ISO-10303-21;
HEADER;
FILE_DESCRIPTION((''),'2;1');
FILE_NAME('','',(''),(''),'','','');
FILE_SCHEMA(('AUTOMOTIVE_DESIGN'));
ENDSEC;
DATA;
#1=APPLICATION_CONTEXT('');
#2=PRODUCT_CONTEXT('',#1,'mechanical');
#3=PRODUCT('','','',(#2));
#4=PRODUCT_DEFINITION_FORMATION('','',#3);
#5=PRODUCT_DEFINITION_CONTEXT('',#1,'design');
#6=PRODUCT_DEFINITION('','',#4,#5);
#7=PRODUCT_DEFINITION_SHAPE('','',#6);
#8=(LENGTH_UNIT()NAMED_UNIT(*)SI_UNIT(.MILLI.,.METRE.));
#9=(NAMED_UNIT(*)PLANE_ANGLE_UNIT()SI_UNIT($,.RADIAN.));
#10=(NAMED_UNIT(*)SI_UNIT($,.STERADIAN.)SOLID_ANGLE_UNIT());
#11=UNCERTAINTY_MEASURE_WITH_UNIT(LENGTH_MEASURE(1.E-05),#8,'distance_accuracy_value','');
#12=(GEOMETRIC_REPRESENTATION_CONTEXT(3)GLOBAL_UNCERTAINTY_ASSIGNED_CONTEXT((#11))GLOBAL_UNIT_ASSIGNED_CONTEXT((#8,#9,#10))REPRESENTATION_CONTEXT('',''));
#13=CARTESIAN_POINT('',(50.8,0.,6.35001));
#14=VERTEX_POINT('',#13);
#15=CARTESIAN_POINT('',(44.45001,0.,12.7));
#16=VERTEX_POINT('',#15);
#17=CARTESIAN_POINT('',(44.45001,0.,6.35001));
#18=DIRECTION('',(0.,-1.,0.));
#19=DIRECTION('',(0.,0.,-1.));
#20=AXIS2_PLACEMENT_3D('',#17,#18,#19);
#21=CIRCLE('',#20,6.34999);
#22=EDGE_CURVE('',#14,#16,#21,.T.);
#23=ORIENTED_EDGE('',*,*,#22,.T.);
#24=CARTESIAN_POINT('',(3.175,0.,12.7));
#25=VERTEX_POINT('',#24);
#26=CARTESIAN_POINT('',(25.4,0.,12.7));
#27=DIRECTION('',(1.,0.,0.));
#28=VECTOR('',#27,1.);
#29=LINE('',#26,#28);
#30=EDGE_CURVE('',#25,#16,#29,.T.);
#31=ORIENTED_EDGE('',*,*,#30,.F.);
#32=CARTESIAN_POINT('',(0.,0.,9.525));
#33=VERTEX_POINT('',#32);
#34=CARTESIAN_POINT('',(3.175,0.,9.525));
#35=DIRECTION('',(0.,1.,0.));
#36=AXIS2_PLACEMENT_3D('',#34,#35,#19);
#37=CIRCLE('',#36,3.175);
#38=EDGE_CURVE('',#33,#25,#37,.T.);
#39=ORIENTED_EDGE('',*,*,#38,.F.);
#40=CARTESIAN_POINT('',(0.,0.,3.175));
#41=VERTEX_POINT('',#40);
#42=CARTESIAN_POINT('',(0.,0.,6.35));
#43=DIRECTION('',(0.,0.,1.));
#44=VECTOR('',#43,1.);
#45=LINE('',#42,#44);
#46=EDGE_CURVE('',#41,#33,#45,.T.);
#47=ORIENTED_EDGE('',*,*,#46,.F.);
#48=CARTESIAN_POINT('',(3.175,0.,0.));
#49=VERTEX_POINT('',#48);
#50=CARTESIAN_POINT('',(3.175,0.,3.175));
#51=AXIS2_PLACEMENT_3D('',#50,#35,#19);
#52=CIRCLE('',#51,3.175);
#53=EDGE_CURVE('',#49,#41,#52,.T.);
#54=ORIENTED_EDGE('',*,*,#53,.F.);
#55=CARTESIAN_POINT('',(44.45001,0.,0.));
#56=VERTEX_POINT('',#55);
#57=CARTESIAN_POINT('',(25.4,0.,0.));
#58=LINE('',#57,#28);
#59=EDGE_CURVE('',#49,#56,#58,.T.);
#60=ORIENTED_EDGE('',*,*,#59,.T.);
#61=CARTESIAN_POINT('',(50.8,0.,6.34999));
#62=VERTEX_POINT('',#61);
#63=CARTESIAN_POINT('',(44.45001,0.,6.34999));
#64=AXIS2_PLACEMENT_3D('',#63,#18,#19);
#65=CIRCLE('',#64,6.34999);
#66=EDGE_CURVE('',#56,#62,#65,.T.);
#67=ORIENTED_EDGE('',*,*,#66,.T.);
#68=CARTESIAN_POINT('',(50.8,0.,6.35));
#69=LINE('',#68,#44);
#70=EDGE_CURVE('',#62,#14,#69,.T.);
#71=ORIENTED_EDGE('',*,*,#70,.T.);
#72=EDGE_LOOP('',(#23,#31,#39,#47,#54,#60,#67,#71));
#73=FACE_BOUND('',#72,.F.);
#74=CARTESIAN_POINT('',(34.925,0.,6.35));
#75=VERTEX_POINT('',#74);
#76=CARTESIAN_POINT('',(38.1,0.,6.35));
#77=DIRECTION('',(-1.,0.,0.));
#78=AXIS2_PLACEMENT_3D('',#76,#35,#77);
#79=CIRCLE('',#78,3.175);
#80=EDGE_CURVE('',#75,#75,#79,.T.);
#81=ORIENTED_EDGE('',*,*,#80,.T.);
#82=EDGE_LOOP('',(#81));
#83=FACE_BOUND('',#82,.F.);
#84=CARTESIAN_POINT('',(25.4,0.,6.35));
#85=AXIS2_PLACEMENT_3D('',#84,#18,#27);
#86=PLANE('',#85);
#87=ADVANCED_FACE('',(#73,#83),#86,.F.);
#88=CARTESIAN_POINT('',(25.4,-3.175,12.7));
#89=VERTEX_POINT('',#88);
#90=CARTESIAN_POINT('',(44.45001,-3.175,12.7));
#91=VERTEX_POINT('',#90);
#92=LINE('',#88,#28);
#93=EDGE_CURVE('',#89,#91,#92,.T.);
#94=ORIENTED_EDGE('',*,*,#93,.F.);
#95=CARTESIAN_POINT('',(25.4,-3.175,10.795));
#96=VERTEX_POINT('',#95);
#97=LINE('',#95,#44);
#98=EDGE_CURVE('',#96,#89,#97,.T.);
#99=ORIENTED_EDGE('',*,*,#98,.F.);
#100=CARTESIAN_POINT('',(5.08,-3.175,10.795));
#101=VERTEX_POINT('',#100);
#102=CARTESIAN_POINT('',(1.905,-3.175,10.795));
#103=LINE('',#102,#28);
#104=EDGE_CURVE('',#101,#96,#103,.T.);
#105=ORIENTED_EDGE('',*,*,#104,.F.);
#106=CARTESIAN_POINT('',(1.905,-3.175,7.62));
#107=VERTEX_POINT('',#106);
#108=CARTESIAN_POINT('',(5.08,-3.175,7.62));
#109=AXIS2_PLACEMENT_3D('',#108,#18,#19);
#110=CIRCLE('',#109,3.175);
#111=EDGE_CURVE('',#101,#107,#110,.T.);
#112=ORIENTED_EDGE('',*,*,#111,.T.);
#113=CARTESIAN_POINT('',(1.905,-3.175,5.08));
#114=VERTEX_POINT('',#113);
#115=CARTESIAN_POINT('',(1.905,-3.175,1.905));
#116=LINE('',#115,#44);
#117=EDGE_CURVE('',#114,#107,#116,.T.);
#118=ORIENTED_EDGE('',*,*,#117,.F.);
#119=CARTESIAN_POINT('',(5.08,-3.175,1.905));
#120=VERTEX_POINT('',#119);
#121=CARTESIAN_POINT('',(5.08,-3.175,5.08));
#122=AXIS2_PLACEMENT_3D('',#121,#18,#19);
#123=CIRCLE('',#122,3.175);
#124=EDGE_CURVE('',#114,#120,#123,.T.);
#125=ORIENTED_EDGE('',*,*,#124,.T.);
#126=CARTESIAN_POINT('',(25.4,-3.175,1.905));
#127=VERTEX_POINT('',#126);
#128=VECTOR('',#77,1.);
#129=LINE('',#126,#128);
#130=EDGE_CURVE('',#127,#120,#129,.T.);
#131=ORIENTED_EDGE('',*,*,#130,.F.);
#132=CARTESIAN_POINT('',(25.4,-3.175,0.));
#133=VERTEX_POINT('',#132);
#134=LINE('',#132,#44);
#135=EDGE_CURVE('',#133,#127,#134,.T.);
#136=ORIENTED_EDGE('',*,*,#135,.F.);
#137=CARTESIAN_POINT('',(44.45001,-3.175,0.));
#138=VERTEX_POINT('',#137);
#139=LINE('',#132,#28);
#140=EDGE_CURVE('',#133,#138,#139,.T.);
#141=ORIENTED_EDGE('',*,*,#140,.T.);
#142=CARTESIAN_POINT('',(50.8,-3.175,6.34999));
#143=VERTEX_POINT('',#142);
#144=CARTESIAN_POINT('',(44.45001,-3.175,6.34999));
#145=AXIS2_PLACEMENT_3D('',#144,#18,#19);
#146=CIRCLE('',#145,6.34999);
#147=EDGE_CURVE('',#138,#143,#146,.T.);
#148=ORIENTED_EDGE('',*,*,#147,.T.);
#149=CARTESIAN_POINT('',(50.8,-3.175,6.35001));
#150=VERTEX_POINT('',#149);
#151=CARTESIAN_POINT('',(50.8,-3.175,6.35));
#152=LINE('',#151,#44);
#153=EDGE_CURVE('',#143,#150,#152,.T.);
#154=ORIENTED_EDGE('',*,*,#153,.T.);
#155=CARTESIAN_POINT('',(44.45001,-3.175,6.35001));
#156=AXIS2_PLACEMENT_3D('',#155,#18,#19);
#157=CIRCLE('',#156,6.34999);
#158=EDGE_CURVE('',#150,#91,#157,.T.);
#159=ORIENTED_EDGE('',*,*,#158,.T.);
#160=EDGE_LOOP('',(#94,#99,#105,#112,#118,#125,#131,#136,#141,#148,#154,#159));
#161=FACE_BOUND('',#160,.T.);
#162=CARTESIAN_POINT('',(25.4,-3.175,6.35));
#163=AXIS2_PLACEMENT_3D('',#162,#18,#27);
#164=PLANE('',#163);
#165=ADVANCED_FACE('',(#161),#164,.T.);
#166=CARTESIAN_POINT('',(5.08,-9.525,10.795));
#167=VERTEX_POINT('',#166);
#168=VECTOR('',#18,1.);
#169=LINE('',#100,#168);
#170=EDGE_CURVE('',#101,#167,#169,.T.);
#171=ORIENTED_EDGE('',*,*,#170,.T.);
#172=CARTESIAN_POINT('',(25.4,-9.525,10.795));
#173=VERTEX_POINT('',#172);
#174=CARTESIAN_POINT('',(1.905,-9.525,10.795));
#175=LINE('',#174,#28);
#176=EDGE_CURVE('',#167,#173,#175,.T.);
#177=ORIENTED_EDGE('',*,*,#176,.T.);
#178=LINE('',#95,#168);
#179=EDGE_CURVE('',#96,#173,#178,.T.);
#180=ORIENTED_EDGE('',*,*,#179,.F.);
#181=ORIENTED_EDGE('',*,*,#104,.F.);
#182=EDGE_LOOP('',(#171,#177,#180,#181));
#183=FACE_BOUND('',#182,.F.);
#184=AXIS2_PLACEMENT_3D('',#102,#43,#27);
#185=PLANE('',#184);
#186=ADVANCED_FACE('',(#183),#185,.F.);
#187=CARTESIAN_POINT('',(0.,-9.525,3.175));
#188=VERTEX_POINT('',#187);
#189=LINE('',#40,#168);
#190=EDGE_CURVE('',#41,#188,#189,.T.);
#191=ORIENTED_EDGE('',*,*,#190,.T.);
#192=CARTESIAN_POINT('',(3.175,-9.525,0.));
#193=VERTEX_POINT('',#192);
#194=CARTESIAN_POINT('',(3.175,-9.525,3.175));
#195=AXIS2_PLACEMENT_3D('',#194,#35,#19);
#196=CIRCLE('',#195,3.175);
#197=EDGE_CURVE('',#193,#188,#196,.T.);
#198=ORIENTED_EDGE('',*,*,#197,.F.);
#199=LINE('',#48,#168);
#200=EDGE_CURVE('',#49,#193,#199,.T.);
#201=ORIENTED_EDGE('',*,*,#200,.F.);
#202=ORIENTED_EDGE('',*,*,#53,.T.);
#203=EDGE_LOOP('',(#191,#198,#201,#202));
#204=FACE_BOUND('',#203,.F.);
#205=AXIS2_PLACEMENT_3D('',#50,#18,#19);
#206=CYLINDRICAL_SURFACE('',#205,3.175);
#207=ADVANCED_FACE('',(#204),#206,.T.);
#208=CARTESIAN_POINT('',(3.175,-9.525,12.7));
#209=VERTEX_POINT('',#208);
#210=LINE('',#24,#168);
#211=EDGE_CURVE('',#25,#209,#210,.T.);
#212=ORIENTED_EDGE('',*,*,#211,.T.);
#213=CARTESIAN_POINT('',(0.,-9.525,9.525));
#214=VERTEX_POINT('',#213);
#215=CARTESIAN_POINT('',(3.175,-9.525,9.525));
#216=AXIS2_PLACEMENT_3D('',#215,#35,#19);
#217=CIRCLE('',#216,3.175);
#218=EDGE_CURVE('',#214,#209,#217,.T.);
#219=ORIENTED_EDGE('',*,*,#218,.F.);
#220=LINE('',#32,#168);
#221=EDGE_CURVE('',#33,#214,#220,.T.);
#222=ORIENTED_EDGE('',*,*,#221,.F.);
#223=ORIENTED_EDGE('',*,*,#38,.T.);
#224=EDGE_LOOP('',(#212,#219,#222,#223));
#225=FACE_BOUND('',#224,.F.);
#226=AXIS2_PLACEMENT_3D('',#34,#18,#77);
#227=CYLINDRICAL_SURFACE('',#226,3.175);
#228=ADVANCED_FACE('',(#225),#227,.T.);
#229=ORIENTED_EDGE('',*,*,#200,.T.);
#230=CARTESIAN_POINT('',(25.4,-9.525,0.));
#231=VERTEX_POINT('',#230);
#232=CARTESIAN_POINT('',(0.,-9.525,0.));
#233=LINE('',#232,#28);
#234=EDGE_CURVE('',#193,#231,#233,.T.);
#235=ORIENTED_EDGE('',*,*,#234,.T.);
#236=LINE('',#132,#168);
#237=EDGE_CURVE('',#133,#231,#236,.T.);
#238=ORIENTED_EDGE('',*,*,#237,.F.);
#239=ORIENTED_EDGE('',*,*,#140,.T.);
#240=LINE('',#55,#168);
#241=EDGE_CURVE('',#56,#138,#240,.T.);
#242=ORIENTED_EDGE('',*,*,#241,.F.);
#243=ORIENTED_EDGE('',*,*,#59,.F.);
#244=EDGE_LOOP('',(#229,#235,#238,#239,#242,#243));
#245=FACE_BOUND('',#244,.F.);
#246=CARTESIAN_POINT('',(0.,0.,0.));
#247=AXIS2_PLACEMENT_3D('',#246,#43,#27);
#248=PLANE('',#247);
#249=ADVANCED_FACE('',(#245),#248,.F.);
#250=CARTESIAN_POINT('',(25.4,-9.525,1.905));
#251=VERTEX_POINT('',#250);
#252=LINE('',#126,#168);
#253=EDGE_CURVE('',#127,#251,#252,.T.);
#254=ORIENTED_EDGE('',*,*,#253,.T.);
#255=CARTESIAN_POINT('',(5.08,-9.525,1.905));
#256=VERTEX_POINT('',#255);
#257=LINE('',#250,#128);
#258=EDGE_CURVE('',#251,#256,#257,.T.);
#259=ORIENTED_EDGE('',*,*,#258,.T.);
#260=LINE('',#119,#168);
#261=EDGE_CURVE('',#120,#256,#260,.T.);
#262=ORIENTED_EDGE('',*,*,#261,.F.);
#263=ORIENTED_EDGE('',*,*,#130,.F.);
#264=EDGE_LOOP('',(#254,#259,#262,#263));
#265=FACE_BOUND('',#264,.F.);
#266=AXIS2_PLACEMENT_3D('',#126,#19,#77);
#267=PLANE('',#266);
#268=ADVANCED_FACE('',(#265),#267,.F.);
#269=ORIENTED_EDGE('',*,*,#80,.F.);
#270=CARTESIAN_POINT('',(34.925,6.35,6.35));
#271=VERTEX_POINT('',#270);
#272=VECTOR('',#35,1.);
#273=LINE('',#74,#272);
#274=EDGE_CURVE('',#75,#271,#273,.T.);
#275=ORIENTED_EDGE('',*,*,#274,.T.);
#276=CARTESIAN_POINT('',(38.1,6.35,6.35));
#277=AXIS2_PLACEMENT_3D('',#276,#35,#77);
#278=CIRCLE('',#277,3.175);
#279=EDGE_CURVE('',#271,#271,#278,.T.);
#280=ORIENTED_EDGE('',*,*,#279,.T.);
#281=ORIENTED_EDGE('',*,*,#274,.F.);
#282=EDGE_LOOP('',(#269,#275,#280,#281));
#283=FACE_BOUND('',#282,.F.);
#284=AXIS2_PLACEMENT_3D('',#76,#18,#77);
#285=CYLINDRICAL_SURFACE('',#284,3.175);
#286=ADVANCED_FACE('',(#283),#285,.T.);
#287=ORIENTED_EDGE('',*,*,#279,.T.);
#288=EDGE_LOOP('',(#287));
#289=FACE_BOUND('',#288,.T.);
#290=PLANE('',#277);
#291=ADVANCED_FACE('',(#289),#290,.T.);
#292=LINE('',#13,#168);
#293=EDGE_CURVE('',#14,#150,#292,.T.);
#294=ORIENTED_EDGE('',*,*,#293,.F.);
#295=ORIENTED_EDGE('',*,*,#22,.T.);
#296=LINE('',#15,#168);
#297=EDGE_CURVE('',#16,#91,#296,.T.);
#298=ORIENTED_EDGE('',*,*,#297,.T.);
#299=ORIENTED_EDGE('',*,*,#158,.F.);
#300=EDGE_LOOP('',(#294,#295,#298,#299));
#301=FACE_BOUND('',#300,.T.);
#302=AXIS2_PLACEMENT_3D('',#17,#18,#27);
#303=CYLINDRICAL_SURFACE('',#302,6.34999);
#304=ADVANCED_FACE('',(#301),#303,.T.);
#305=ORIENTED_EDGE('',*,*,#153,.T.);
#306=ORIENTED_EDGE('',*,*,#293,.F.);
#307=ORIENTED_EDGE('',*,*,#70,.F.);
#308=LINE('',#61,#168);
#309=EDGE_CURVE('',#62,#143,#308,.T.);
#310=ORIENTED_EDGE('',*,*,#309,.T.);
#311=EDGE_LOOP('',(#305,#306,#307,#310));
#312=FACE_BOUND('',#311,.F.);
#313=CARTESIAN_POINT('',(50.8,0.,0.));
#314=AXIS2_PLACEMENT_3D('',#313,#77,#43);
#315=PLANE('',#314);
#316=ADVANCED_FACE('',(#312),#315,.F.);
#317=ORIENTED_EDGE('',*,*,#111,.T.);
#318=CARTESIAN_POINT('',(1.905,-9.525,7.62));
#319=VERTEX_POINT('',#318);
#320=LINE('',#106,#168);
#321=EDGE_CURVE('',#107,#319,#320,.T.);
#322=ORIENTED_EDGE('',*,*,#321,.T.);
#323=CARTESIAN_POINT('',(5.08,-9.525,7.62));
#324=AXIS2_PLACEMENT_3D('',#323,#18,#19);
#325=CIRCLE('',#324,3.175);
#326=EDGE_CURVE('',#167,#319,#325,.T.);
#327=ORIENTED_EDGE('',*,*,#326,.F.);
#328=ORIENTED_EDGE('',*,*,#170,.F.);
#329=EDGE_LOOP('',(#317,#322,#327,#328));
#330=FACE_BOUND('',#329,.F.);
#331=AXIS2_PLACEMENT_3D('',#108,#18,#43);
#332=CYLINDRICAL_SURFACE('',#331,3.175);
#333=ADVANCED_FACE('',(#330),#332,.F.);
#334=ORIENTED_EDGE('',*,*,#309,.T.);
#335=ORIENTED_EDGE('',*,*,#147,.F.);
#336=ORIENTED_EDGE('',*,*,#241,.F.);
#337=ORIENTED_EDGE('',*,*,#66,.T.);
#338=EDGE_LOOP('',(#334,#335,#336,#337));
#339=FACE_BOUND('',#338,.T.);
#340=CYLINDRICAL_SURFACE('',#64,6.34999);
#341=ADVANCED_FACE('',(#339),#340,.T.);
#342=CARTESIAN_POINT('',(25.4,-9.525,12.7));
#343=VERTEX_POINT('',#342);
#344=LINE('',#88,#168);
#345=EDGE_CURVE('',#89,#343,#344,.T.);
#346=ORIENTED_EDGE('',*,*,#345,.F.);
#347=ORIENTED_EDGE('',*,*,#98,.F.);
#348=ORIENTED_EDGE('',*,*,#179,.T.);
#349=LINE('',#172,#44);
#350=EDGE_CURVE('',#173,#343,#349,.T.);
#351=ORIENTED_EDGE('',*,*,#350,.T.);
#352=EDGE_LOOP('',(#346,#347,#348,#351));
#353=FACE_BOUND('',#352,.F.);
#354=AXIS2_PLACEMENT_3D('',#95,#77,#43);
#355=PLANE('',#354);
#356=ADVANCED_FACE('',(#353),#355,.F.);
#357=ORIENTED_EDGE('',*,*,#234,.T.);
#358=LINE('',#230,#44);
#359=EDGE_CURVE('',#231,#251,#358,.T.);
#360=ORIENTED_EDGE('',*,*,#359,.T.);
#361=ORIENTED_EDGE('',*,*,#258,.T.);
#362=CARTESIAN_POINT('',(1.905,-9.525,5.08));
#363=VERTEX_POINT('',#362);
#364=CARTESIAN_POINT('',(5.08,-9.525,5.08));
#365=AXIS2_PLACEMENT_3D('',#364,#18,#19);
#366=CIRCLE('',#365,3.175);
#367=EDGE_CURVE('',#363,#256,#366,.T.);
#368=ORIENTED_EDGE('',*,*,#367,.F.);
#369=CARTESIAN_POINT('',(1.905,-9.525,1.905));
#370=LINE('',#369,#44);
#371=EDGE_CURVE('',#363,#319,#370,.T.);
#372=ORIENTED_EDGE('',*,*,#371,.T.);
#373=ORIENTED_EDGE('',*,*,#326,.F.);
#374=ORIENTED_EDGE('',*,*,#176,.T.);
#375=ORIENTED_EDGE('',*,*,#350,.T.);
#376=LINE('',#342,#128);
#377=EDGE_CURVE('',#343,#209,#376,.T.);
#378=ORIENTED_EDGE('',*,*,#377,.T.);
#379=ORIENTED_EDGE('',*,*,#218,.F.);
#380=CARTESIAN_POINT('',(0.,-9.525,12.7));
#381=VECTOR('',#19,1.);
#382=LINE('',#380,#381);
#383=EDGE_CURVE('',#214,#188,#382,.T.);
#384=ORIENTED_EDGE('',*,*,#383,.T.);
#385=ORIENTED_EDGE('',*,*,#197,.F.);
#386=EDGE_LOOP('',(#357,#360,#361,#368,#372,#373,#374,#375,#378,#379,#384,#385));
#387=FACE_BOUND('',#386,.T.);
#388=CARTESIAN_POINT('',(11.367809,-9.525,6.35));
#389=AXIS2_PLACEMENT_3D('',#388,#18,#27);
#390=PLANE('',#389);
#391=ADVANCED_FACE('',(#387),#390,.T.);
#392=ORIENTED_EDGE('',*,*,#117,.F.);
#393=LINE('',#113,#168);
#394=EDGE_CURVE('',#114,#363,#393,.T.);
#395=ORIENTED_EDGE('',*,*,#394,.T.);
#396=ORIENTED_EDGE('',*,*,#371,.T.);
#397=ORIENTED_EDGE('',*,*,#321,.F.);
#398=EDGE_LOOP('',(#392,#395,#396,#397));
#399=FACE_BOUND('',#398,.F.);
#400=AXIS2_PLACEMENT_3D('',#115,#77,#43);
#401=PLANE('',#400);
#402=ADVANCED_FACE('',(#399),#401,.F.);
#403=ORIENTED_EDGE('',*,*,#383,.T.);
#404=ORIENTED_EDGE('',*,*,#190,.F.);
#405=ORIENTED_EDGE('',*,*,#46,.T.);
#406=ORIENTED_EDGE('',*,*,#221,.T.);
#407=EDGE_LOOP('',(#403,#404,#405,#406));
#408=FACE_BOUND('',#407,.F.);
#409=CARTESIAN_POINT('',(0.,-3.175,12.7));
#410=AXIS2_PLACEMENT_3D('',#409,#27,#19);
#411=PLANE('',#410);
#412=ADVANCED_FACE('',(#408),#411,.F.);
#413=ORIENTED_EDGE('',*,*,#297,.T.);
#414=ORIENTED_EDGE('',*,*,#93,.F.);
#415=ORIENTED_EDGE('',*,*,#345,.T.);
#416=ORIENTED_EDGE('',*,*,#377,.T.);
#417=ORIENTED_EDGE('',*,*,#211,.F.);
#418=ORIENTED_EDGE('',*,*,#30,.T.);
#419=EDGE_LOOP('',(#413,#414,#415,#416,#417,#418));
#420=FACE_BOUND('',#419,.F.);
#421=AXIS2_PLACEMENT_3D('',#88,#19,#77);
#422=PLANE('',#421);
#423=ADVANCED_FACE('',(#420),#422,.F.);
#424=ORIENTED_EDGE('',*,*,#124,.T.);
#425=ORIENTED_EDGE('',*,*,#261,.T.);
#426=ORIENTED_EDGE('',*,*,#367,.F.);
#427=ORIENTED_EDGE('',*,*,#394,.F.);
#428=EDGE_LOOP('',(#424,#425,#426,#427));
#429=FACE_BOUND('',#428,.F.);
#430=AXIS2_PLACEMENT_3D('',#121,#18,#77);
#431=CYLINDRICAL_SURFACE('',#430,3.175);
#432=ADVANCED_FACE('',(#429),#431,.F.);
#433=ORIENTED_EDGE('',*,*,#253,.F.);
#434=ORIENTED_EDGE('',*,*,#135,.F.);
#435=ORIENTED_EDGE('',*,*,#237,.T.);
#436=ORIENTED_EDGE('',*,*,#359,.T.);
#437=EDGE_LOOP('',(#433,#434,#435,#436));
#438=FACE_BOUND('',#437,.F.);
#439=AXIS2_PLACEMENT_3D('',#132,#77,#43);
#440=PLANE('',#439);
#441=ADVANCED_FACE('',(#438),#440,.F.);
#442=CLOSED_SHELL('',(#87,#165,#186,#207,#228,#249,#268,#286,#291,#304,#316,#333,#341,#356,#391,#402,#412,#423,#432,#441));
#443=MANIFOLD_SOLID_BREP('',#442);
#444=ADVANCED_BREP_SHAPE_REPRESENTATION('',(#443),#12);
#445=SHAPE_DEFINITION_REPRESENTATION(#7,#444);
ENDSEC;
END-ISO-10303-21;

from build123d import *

# Parameters (mm, degrees)
F0_W     = 50.8
F0_H     = 12.7
F1_DEPTH = 3.175
F2_R     = 3.175
F3_DEPTH = 6.35
F5_DEPTH = 6.35
F6_R     = 6.34999
F7_R     = 3.175


# Not quite as in the source:
# - a fillet or chamfer is up to 0.001 mm smaller than in the source, because OpenCascade refuses the exact size


with BuildPart() as f1:
    # F0 (on Front) → F1 (new body)
    with BuildSketch(Plane.XZ):
        with Locations((25.4, 6.35)):
            Rectangle(F0_W, F0_H)
    extrude(amount=F1_DEPTH)

    # F2 (on face) → F3 (join)
    with BuildSketch(Plane(origin=(0, 0, 0), x_dir=(-1, 0, 0), z_dir=(0, 1, 0))):
        with Locations((-38.1, 6.35)):
            Circle(F2_R)
    extrude(amount=F3_DEPTH)

    # F4 (on face) → F5 (join)
    with BuildSketch(Plane.XZ.offset(3.175)):
        Polygon((25.4, 10.795), (25.4, 12.7), (0, 12.7), (0, 0), (25.4, 0), (25.4, 1.905), (1.905, 1.905), (1.905, 10.795), align=None)
    extrude(amount=F5_DEPTH)

    # F6 (radius 6.35 in the source; OpenCascade refuses exactly that, so slightly less here)
    f6_edges = [f1.edges().sort_by_distance(p)[0] for p in [
        (50.8, -1.5875, 0),
        (50.8, -1.5875, 12.7),
    ]]
    fillet(f6_edges, radius=F6_R)

    # F7
    f7_edges = [f1.edges().sort_by_distance(p)[0] for p in [
        (0, -4.7625, 12.7),
        (0, -4.7625, 0),
        (1.905, -6.35, 10.795),
        (1.905, -6.35, 1.905),
    ]]
    fillet(f7_edges, radius=F7_R)


solid = f1.part
